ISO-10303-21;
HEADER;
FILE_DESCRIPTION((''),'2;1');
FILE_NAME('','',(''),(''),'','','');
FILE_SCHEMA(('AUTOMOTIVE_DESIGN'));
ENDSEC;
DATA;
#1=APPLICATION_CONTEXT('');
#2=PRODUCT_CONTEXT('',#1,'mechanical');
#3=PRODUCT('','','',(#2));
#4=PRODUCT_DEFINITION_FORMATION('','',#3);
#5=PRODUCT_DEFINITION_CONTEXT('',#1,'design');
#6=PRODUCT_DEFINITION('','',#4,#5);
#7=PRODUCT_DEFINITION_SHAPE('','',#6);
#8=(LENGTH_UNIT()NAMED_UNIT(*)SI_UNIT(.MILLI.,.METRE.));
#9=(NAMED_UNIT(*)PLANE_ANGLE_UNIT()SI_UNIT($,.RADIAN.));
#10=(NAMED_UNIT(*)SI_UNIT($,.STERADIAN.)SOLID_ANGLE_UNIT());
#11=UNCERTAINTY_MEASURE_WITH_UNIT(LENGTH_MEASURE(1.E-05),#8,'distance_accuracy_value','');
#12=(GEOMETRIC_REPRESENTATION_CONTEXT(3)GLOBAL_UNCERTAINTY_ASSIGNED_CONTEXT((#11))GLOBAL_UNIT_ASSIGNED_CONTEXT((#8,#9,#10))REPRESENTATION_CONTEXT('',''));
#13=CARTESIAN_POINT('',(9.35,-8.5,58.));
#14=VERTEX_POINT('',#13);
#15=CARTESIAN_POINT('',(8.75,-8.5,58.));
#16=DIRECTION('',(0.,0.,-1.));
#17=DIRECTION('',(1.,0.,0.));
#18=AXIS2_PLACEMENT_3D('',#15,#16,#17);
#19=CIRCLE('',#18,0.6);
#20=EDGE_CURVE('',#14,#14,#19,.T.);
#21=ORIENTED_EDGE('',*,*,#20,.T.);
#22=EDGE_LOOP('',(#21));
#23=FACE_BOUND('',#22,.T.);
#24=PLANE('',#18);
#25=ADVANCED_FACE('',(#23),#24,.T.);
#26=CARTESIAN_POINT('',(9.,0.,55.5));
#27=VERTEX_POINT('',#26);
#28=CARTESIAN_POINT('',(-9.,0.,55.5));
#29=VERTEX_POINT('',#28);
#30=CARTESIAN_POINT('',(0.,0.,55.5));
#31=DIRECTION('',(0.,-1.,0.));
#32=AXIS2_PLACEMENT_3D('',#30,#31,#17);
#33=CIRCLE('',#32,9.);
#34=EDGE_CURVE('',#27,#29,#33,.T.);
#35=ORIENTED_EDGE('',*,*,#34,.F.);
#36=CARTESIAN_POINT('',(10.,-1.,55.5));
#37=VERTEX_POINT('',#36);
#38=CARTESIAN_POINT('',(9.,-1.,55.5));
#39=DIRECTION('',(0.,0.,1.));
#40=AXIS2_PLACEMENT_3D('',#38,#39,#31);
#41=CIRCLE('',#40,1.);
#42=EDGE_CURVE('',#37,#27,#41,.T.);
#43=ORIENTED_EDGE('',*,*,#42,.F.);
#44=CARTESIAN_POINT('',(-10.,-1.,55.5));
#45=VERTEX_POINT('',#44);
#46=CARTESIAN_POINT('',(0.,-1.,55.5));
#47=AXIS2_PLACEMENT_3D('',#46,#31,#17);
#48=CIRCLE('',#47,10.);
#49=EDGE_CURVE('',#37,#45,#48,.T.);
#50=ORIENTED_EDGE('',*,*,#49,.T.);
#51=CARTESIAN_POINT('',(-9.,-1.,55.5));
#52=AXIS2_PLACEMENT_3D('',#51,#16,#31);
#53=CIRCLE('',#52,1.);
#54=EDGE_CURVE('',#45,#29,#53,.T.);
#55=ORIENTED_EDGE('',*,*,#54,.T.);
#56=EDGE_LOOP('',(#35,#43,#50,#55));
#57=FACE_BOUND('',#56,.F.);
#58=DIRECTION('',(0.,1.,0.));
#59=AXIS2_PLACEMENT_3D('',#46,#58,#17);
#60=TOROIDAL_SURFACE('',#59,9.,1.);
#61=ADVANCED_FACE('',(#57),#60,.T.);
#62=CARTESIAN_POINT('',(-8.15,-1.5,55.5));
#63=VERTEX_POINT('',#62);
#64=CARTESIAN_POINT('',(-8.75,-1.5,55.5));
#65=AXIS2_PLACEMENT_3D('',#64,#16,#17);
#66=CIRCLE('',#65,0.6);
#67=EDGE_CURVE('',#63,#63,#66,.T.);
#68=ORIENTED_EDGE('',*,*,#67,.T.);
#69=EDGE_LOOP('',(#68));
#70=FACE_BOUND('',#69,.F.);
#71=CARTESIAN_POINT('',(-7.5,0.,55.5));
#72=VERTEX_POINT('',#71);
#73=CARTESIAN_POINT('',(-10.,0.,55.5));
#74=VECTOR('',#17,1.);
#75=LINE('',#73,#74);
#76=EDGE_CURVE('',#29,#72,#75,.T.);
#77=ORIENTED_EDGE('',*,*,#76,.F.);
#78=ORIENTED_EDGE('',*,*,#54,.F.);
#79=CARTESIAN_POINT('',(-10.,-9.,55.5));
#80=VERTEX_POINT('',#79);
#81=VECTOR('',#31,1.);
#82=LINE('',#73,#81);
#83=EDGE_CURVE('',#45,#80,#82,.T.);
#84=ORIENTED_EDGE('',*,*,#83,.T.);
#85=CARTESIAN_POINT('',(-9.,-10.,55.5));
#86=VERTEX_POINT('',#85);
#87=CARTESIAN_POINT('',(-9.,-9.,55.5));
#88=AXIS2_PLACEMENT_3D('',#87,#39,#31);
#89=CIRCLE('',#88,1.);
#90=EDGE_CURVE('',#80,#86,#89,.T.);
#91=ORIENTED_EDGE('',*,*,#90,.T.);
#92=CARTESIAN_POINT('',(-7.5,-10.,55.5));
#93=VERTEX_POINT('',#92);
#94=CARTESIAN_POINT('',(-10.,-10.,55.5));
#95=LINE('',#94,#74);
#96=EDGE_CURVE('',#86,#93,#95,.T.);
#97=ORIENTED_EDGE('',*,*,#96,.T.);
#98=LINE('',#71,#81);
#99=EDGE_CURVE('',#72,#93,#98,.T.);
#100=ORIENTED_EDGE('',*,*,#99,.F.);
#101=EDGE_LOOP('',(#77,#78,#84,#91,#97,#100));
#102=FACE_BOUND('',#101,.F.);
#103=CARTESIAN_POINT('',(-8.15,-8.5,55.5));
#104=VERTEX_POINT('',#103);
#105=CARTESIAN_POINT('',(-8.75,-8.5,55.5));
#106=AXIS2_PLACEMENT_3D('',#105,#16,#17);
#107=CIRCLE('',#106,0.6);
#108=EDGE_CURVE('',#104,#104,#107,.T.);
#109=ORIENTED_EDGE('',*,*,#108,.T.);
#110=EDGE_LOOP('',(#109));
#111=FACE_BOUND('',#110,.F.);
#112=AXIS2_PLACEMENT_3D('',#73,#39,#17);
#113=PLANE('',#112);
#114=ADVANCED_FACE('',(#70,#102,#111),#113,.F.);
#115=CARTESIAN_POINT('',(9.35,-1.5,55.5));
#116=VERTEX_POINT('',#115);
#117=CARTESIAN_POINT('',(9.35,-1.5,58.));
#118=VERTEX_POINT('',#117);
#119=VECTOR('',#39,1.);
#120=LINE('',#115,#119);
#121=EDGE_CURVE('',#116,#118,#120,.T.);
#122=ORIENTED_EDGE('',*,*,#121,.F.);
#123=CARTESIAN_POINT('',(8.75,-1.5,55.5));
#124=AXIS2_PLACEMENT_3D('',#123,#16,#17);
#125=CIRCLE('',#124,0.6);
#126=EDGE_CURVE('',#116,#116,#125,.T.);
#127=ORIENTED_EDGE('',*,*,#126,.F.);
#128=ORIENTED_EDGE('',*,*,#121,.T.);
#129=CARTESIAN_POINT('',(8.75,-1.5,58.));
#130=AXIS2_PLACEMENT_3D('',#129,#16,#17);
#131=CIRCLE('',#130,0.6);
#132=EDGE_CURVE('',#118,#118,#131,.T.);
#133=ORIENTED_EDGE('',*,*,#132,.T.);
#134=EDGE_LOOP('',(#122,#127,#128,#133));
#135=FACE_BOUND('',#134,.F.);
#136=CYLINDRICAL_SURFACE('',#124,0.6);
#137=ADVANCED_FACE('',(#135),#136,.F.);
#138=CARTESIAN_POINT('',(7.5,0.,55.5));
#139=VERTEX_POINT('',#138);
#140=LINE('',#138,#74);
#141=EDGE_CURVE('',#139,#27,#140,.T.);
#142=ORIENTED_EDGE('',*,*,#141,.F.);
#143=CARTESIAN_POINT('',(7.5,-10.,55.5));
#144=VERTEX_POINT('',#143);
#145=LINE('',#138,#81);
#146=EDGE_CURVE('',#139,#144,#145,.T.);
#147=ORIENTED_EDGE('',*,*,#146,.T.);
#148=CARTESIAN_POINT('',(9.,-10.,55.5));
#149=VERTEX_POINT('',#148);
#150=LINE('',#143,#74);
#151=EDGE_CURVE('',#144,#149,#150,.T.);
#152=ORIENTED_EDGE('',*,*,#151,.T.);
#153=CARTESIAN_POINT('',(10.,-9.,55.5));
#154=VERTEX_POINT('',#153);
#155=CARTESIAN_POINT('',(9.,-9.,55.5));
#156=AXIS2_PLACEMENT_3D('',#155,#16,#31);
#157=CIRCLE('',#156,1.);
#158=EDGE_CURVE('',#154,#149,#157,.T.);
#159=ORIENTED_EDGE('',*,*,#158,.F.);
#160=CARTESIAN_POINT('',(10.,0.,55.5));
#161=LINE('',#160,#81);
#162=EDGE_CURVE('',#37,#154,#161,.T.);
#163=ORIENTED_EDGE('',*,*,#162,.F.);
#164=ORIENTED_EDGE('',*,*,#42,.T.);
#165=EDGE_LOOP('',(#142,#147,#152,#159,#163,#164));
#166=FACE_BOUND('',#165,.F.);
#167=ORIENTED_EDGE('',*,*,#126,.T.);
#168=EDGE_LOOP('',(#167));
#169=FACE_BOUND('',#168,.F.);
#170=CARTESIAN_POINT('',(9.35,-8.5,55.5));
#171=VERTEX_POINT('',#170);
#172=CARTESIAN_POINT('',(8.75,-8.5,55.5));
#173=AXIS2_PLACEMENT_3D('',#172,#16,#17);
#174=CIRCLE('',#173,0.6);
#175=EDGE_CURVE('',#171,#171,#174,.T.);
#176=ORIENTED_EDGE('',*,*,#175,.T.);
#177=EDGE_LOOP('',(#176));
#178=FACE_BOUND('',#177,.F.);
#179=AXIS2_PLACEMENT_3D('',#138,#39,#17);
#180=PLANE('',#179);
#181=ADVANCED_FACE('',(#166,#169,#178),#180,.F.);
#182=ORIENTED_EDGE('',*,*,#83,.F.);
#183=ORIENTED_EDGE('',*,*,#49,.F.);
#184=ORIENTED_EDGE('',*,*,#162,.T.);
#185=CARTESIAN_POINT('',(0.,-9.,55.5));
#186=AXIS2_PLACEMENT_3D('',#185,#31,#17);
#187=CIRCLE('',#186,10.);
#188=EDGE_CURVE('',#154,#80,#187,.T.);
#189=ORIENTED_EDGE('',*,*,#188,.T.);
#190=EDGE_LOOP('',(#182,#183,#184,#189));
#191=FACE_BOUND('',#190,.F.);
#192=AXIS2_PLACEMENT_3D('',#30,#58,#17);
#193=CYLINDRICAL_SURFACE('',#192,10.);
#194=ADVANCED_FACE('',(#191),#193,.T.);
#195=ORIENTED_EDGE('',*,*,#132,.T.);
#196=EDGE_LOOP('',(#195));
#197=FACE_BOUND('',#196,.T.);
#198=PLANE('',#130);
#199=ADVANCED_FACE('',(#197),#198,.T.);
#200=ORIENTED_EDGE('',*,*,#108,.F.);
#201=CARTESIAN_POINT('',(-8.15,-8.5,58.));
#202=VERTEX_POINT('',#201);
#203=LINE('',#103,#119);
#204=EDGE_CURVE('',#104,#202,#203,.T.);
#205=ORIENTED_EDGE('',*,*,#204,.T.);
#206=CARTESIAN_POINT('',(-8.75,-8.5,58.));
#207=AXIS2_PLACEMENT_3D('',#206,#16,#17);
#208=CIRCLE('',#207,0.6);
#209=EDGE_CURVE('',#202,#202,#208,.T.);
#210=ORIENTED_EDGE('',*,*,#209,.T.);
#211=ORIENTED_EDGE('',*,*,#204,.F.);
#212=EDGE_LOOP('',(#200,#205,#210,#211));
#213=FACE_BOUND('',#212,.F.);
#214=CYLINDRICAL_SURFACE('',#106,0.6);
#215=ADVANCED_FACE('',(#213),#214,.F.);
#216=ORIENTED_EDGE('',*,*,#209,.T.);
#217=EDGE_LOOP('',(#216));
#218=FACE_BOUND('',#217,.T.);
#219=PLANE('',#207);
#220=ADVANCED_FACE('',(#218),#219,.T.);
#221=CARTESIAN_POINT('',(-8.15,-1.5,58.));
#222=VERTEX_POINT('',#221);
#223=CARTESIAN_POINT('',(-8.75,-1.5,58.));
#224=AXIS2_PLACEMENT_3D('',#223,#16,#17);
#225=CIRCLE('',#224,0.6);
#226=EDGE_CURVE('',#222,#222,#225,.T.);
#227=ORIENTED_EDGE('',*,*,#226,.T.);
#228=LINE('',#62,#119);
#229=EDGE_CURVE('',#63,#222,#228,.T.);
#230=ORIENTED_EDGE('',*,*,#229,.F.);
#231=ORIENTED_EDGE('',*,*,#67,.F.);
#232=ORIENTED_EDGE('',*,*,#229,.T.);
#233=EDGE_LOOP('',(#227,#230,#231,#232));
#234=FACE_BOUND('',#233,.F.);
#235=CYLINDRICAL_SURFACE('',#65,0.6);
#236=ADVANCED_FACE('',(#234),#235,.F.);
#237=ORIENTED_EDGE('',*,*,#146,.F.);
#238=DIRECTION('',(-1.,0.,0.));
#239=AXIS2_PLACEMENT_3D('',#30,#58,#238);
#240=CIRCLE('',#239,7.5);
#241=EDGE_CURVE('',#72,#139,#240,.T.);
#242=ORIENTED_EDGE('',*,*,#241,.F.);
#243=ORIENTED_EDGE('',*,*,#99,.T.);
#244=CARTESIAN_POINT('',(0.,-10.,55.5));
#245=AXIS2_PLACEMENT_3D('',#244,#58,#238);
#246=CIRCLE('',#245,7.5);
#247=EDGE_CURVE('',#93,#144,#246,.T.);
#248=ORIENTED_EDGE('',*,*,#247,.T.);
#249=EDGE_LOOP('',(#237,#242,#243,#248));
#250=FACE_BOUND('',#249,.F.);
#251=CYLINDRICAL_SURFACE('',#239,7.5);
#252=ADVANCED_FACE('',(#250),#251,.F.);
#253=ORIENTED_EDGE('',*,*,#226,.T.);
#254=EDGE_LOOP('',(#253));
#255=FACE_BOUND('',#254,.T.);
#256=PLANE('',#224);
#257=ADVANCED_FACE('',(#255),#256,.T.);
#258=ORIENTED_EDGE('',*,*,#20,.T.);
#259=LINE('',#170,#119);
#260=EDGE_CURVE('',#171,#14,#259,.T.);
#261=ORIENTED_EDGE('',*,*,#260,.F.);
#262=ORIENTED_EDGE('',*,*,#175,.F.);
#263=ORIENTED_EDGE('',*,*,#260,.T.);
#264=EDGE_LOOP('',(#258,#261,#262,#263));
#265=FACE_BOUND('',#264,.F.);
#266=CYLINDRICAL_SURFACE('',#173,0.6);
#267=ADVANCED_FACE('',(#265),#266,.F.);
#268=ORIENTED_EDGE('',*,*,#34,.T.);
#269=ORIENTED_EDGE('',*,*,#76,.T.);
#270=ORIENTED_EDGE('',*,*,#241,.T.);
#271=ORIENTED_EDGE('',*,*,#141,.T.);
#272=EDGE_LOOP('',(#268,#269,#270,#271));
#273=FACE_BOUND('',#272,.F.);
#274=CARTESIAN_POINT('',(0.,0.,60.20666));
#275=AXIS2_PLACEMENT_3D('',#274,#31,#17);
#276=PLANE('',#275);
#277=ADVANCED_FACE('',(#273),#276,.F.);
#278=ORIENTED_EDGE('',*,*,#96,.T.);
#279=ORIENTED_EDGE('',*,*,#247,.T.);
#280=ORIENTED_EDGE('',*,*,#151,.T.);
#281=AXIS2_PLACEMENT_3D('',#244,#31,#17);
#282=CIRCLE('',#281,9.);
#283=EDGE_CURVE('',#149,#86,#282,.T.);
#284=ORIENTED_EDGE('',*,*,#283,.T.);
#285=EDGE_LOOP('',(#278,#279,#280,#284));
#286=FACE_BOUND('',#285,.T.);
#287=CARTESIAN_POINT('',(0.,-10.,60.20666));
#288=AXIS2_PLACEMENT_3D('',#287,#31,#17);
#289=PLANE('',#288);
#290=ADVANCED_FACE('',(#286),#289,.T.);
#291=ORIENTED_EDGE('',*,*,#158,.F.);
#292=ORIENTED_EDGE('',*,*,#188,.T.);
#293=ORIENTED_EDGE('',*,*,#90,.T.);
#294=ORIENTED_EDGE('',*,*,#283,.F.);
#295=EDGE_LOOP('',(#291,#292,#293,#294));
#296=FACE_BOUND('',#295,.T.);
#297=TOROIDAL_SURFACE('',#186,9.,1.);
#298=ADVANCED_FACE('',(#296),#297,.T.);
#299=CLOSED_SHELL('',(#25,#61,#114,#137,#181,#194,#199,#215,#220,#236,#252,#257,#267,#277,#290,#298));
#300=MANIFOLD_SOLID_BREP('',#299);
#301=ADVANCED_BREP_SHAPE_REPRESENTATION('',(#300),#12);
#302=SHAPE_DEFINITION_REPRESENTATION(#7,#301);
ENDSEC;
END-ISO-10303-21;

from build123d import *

# Parameters (mm, degrees)
F1_DEPTH = 10
F2_R     = 1
F3_R     = 0.6
F4_DEPTH = 2.5


with BuildPart() as f1:
    # F0 (on Front) → F1 (new body)
    with BuildSketch(Plane.XZ):
        with BuildLine():
            Line((7.5, 55.5), (10, 55.5))
            ThreePointArc((10, 55.5), (0, 65.5), (-10, 55.5))
            Line((-10, 55.5), (-7.5, 55.5))
            ThreePointArc((-7.5, 55.5), (0, 63), (7.5, 55.5))
        make_face()
    extrude(amount=F1_DEPTH)

    # F2
    f2_edges = [f1.edges().sort_by_distance(p)[0] for p in [
        (0, 0, 65.5),
        (0, -10, 65.5),
    ]]
    fillet(f2_edges, radius=F2_R)

    # F3 (on face) → F4 (cut)
    with BuildSketch(Plane(origin=(0, 0, 55.5), x_dir=(1, 0, 0), z_dir=(0, 0, -1))):
        with Locations((8.75, 1.5)):
            Circle(F3_R)
        with Locations((8.75, 8.5)):
            Circle(F3_R)
        with Locations((-8.75, 1.5)):
            Circle(F3_R)
        with Locations((-8.75, 8.5)):
            Circle(F3_R)
    extrude(amount=-F4_DEPTH, mode=Mode.SUBTRACT)


solid = f1.part
